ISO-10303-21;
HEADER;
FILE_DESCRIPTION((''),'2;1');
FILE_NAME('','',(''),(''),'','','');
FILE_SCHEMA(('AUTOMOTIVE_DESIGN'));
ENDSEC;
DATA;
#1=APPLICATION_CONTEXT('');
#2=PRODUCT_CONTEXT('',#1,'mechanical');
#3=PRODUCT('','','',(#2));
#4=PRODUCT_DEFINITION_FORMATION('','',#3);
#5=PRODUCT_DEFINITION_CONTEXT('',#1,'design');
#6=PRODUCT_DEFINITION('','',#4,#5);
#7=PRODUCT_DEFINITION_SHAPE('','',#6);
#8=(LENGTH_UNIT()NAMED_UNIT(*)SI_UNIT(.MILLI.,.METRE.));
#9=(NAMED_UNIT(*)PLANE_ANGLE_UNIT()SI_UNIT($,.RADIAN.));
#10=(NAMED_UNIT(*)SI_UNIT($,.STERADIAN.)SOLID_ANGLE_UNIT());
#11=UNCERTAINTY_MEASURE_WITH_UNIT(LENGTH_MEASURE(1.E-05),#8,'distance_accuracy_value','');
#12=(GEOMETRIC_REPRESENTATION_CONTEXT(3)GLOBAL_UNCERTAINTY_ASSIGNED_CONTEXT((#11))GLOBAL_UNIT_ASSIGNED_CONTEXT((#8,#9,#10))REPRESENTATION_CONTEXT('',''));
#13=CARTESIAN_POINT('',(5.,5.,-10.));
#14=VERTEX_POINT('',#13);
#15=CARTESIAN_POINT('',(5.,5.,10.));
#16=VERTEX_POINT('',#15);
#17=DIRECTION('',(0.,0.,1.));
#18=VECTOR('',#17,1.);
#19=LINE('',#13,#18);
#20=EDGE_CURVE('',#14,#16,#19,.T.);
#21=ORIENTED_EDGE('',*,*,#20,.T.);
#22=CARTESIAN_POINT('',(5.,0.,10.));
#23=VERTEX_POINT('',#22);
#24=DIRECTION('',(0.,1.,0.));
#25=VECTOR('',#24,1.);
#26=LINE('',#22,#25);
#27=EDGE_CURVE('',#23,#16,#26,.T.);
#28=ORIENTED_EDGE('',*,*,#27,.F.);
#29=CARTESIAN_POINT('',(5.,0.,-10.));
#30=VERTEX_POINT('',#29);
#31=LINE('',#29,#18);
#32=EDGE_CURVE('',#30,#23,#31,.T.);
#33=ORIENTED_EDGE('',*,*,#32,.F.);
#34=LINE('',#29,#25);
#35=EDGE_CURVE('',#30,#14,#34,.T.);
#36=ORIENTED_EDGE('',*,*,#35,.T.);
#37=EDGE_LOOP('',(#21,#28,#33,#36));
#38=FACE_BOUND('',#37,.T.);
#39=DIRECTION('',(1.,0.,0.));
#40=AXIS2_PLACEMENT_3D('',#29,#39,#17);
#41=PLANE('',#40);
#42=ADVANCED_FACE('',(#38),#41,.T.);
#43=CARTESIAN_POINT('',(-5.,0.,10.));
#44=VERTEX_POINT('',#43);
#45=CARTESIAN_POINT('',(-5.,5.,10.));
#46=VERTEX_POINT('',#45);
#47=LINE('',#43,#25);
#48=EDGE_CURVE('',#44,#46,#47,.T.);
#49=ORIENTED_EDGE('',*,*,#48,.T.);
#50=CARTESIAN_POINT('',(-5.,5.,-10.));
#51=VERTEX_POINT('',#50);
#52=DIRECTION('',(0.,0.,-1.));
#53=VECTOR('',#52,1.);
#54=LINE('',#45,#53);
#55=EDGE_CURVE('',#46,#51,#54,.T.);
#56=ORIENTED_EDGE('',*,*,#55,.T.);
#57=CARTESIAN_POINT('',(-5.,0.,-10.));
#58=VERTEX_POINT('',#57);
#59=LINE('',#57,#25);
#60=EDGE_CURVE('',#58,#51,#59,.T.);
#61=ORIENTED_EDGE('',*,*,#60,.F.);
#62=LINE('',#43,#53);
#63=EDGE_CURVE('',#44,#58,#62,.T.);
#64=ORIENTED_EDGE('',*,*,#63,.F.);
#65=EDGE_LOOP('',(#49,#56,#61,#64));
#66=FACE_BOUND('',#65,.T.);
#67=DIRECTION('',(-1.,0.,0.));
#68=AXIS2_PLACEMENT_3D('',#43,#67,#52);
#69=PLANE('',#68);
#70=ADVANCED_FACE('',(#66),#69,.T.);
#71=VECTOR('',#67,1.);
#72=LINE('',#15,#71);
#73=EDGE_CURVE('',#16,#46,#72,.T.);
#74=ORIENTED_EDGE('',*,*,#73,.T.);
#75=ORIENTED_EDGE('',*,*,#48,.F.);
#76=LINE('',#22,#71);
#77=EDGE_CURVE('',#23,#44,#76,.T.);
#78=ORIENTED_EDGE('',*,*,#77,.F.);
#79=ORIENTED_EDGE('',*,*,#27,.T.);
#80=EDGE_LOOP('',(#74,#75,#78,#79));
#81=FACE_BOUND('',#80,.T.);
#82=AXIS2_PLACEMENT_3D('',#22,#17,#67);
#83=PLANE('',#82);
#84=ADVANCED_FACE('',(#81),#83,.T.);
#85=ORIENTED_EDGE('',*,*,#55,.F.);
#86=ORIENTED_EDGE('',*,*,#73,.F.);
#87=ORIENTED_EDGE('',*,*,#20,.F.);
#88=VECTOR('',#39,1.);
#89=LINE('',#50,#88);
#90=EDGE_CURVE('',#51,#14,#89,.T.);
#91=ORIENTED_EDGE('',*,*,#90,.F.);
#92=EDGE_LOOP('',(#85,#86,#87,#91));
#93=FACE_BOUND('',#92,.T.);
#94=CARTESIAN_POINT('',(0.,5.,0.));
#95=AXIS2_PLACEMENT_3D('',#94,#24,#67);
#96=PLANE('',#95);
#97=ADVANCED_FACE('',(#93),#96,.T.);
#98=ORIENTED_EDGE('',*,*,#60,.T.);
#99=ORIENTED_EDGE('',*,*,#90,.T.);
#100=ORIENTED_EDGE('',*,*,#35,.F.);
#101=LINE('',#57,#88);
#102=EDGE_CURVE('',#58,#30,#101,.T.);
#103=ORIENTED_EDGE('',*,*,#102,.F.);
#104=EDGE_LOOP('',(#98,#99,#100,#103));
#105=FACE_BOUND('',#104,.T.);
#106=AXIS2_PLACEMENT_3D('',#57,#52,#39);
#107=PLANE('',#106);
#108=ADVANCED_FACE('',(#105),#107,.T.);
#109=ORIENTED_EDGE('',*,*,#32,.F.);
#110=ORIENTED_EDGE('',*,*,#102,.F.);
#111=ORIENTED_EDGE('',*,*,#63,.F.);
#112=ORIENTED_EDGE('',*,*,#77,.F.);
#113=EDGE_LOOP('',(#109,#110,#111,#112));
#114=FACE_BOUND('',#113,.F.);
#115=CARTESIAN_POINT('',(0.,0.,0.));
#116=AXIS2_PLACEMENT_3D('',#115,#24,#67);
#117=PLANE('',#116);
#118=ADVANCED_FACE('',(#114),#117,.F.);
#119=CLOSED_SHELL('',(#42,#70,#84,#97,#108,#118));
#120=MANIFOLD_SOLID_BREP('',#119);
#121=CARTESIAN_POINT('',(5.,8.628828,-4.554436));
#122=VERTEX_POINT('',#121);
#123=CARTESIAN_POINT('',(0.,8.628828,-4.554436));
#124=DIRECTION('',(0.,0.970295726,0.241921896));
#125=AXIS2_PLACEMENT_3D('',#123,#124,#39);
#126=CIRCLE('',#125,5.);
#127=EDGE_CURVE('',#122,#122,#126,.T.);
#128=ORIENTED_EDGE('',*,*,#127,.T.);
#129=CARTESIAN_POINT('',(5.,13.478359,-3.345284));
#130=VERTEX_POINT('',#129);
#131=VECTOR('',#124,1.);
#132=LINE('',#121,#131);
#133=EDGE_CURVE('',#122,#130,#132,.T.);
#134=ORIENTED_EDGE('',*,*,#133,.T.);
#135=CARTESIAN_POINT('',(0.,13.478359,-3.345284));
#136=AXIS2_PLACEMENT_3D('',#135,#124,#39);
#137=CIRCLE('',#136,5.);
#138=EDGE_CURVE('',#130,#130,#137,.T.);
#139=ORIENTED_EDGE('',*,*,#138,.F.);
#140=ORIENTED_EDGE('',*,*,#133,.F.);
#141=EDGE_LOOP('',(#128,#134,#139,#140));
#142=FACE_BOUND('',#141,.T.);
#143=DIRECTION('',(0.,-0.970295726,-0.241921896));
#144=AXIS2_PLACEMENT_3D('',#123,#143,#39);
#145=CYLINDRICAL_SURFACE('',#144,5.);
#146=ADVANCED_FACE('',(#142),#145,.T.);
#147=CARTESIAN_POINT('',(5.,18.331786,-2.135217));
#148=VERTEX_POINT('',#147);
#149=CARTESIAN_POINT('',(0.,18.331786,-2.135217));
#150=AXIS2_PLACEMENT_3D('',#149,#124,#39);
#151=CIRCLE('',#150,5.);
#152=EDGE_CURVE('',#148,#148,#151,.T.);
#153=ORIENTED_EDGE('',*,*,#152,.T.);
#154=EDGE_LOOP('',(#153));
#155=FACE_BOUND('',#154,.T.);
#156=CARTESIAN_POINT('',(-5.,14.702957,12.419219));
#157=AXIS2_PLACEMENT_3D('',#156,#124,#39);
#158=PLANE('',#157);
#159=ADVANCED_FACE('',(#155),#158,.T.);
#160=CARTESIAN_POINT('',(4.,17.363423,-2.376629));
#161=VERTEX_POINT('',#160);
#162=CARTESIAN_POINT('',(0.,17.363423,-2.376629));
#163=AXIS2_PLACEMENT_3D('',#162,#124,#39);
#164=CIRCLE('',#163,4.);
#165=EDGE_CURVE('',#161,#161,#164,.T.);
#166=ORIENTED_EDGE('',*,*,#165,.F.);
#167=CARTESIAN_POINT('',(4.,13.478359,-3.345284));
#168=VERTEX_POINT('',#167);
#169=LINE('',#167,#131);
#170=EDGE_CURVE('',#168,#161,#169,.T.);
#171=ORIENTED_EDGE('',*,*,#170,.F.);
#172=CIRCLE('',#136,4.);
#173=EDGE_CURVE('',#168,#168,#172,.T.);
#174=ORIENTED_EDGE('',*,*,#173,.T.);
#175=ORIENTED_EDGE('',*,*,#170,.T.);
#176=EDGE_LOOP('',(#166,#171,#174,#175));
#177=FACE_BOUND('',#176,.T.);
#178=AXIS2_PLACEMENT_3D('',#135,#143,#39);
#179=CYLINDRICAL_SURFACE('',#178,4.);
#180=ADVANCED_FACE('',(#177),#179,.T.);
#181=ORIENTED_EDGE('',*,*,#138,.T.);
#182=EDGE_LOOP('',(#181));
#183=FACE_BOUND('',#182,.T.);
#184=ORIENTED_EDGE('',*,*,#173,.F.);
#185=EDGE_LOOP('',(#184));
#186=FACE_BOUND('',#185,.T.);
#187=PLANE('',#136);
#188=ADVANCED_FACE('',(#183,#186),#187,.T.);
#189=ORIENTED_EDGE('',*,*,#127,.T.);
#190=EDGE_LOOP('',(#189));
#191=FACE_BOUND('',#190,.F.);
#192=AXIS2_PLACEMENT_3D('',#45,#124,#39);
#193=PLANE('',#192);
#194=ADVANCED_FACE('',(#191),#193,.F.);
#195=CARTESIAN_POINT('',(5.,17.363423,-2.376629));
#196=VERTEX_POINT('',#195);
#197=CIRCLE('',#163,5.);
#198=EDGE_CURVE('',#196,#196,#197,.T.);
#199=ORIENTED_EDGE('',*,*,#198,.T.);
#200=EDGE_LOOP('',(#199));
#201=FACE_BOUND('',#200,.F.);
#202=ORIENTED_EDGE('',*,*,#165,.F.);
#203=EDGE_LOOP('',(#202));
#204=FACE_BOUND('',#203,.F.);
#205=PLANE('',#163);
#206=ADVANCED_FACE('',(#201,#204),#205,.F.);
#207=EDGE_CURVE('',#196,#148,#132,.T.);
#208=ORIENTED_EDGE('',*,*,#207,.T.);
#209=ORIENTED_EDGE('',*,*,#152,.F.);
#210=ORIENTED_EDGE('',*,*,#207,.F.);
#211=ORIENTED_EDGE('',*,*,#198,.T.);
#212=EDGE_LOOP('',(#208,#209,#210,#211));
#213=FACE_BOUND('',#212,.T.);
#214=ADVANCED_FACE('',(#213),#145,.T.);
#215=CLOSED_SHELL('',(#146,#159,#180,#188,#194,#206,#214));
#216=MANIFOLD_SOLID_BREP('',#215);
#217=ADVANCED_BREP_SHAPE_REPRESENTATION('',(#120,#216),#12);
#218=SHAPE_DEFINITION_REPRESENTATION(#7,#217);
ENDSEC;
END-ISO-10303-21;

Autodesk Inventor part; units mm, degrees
ref_plane "YZ Plane" through (0, 0, 0) normal (1, 0, 0) x (0, 1, 0)
ref_plane "XZ Plane" through (0, 0, 0) normal (0, 1, 0) x (-1, 0, 0)
ref_plane "XY Plane" through (0, 0, 0) normal (0, 0, 1) x (1, 0, 0)
sketch "Sketch1" plane through (0, 0, 0) normal (1, 0, 0) x (0, 1, 0)
  point P0 (0, 0)
sketch "Sketch2" plane through (0, 0, 0) normal (0, 1, 0) x (-1, 0, 0)
  line L0 (5, -10) -> (-5, -10)
  line L1 (-5, -10) -> (-5, 10)
  line L2 (-5, 10) -> (5, 10)
  line L3 (5, 10) -> (5, -10)
  line L4 (5, -10) -> (-5, 10) construction
  line L5 (-5, -10) -> (5, 10) construction
  point P0 (0, 0)
  dimension "d0" = 10
  dimension "d1" = 20
extrude "Extrusion1" add sketch "Sketch2" along normal blind 5
ref_plane "Work Plane2" through (-5, 5, 10) normal (0, 0.9702957, 0.2419219) x (1, 0, 0)
sketch "Sketch3" plane through (-5, 5, 10) normal (0, 0.9702957, 0.2419219) x (1, 0, 0)
  circle A0 centre (5, 15) radius 5
  line L0 (0, 0) -> (10, 0) projected
  point P0 (5, 8.4933)
  point P1 (5, 0)
  dimension "d6" = 10
  dimension "d7" = 15
extrude "Extrusion2" add sketch "Sketch3" along normal blind 10
ref_plane "Work Plane3" through (0, 13.4803, -3.3448) normal (0, 0.9702957, 0.2419219) x (1, 0, 0)
sketch "Sketch4" plane through (0, 13.4803, -3.3448) normal (0, 0.9702957, 0.2419219) x (1, 0, 0)
  circle A0 centre (0, 0) radius 5
  circle A1 centre (0, 0) radius 4
  point P0 (0, -6.5067)
  dimension "d11" = 8
extrude "Extrusion3" cut sketch "Sketch4" along normal blind 4
equation "\"d8\" = d6"
properties part number "HGT"
